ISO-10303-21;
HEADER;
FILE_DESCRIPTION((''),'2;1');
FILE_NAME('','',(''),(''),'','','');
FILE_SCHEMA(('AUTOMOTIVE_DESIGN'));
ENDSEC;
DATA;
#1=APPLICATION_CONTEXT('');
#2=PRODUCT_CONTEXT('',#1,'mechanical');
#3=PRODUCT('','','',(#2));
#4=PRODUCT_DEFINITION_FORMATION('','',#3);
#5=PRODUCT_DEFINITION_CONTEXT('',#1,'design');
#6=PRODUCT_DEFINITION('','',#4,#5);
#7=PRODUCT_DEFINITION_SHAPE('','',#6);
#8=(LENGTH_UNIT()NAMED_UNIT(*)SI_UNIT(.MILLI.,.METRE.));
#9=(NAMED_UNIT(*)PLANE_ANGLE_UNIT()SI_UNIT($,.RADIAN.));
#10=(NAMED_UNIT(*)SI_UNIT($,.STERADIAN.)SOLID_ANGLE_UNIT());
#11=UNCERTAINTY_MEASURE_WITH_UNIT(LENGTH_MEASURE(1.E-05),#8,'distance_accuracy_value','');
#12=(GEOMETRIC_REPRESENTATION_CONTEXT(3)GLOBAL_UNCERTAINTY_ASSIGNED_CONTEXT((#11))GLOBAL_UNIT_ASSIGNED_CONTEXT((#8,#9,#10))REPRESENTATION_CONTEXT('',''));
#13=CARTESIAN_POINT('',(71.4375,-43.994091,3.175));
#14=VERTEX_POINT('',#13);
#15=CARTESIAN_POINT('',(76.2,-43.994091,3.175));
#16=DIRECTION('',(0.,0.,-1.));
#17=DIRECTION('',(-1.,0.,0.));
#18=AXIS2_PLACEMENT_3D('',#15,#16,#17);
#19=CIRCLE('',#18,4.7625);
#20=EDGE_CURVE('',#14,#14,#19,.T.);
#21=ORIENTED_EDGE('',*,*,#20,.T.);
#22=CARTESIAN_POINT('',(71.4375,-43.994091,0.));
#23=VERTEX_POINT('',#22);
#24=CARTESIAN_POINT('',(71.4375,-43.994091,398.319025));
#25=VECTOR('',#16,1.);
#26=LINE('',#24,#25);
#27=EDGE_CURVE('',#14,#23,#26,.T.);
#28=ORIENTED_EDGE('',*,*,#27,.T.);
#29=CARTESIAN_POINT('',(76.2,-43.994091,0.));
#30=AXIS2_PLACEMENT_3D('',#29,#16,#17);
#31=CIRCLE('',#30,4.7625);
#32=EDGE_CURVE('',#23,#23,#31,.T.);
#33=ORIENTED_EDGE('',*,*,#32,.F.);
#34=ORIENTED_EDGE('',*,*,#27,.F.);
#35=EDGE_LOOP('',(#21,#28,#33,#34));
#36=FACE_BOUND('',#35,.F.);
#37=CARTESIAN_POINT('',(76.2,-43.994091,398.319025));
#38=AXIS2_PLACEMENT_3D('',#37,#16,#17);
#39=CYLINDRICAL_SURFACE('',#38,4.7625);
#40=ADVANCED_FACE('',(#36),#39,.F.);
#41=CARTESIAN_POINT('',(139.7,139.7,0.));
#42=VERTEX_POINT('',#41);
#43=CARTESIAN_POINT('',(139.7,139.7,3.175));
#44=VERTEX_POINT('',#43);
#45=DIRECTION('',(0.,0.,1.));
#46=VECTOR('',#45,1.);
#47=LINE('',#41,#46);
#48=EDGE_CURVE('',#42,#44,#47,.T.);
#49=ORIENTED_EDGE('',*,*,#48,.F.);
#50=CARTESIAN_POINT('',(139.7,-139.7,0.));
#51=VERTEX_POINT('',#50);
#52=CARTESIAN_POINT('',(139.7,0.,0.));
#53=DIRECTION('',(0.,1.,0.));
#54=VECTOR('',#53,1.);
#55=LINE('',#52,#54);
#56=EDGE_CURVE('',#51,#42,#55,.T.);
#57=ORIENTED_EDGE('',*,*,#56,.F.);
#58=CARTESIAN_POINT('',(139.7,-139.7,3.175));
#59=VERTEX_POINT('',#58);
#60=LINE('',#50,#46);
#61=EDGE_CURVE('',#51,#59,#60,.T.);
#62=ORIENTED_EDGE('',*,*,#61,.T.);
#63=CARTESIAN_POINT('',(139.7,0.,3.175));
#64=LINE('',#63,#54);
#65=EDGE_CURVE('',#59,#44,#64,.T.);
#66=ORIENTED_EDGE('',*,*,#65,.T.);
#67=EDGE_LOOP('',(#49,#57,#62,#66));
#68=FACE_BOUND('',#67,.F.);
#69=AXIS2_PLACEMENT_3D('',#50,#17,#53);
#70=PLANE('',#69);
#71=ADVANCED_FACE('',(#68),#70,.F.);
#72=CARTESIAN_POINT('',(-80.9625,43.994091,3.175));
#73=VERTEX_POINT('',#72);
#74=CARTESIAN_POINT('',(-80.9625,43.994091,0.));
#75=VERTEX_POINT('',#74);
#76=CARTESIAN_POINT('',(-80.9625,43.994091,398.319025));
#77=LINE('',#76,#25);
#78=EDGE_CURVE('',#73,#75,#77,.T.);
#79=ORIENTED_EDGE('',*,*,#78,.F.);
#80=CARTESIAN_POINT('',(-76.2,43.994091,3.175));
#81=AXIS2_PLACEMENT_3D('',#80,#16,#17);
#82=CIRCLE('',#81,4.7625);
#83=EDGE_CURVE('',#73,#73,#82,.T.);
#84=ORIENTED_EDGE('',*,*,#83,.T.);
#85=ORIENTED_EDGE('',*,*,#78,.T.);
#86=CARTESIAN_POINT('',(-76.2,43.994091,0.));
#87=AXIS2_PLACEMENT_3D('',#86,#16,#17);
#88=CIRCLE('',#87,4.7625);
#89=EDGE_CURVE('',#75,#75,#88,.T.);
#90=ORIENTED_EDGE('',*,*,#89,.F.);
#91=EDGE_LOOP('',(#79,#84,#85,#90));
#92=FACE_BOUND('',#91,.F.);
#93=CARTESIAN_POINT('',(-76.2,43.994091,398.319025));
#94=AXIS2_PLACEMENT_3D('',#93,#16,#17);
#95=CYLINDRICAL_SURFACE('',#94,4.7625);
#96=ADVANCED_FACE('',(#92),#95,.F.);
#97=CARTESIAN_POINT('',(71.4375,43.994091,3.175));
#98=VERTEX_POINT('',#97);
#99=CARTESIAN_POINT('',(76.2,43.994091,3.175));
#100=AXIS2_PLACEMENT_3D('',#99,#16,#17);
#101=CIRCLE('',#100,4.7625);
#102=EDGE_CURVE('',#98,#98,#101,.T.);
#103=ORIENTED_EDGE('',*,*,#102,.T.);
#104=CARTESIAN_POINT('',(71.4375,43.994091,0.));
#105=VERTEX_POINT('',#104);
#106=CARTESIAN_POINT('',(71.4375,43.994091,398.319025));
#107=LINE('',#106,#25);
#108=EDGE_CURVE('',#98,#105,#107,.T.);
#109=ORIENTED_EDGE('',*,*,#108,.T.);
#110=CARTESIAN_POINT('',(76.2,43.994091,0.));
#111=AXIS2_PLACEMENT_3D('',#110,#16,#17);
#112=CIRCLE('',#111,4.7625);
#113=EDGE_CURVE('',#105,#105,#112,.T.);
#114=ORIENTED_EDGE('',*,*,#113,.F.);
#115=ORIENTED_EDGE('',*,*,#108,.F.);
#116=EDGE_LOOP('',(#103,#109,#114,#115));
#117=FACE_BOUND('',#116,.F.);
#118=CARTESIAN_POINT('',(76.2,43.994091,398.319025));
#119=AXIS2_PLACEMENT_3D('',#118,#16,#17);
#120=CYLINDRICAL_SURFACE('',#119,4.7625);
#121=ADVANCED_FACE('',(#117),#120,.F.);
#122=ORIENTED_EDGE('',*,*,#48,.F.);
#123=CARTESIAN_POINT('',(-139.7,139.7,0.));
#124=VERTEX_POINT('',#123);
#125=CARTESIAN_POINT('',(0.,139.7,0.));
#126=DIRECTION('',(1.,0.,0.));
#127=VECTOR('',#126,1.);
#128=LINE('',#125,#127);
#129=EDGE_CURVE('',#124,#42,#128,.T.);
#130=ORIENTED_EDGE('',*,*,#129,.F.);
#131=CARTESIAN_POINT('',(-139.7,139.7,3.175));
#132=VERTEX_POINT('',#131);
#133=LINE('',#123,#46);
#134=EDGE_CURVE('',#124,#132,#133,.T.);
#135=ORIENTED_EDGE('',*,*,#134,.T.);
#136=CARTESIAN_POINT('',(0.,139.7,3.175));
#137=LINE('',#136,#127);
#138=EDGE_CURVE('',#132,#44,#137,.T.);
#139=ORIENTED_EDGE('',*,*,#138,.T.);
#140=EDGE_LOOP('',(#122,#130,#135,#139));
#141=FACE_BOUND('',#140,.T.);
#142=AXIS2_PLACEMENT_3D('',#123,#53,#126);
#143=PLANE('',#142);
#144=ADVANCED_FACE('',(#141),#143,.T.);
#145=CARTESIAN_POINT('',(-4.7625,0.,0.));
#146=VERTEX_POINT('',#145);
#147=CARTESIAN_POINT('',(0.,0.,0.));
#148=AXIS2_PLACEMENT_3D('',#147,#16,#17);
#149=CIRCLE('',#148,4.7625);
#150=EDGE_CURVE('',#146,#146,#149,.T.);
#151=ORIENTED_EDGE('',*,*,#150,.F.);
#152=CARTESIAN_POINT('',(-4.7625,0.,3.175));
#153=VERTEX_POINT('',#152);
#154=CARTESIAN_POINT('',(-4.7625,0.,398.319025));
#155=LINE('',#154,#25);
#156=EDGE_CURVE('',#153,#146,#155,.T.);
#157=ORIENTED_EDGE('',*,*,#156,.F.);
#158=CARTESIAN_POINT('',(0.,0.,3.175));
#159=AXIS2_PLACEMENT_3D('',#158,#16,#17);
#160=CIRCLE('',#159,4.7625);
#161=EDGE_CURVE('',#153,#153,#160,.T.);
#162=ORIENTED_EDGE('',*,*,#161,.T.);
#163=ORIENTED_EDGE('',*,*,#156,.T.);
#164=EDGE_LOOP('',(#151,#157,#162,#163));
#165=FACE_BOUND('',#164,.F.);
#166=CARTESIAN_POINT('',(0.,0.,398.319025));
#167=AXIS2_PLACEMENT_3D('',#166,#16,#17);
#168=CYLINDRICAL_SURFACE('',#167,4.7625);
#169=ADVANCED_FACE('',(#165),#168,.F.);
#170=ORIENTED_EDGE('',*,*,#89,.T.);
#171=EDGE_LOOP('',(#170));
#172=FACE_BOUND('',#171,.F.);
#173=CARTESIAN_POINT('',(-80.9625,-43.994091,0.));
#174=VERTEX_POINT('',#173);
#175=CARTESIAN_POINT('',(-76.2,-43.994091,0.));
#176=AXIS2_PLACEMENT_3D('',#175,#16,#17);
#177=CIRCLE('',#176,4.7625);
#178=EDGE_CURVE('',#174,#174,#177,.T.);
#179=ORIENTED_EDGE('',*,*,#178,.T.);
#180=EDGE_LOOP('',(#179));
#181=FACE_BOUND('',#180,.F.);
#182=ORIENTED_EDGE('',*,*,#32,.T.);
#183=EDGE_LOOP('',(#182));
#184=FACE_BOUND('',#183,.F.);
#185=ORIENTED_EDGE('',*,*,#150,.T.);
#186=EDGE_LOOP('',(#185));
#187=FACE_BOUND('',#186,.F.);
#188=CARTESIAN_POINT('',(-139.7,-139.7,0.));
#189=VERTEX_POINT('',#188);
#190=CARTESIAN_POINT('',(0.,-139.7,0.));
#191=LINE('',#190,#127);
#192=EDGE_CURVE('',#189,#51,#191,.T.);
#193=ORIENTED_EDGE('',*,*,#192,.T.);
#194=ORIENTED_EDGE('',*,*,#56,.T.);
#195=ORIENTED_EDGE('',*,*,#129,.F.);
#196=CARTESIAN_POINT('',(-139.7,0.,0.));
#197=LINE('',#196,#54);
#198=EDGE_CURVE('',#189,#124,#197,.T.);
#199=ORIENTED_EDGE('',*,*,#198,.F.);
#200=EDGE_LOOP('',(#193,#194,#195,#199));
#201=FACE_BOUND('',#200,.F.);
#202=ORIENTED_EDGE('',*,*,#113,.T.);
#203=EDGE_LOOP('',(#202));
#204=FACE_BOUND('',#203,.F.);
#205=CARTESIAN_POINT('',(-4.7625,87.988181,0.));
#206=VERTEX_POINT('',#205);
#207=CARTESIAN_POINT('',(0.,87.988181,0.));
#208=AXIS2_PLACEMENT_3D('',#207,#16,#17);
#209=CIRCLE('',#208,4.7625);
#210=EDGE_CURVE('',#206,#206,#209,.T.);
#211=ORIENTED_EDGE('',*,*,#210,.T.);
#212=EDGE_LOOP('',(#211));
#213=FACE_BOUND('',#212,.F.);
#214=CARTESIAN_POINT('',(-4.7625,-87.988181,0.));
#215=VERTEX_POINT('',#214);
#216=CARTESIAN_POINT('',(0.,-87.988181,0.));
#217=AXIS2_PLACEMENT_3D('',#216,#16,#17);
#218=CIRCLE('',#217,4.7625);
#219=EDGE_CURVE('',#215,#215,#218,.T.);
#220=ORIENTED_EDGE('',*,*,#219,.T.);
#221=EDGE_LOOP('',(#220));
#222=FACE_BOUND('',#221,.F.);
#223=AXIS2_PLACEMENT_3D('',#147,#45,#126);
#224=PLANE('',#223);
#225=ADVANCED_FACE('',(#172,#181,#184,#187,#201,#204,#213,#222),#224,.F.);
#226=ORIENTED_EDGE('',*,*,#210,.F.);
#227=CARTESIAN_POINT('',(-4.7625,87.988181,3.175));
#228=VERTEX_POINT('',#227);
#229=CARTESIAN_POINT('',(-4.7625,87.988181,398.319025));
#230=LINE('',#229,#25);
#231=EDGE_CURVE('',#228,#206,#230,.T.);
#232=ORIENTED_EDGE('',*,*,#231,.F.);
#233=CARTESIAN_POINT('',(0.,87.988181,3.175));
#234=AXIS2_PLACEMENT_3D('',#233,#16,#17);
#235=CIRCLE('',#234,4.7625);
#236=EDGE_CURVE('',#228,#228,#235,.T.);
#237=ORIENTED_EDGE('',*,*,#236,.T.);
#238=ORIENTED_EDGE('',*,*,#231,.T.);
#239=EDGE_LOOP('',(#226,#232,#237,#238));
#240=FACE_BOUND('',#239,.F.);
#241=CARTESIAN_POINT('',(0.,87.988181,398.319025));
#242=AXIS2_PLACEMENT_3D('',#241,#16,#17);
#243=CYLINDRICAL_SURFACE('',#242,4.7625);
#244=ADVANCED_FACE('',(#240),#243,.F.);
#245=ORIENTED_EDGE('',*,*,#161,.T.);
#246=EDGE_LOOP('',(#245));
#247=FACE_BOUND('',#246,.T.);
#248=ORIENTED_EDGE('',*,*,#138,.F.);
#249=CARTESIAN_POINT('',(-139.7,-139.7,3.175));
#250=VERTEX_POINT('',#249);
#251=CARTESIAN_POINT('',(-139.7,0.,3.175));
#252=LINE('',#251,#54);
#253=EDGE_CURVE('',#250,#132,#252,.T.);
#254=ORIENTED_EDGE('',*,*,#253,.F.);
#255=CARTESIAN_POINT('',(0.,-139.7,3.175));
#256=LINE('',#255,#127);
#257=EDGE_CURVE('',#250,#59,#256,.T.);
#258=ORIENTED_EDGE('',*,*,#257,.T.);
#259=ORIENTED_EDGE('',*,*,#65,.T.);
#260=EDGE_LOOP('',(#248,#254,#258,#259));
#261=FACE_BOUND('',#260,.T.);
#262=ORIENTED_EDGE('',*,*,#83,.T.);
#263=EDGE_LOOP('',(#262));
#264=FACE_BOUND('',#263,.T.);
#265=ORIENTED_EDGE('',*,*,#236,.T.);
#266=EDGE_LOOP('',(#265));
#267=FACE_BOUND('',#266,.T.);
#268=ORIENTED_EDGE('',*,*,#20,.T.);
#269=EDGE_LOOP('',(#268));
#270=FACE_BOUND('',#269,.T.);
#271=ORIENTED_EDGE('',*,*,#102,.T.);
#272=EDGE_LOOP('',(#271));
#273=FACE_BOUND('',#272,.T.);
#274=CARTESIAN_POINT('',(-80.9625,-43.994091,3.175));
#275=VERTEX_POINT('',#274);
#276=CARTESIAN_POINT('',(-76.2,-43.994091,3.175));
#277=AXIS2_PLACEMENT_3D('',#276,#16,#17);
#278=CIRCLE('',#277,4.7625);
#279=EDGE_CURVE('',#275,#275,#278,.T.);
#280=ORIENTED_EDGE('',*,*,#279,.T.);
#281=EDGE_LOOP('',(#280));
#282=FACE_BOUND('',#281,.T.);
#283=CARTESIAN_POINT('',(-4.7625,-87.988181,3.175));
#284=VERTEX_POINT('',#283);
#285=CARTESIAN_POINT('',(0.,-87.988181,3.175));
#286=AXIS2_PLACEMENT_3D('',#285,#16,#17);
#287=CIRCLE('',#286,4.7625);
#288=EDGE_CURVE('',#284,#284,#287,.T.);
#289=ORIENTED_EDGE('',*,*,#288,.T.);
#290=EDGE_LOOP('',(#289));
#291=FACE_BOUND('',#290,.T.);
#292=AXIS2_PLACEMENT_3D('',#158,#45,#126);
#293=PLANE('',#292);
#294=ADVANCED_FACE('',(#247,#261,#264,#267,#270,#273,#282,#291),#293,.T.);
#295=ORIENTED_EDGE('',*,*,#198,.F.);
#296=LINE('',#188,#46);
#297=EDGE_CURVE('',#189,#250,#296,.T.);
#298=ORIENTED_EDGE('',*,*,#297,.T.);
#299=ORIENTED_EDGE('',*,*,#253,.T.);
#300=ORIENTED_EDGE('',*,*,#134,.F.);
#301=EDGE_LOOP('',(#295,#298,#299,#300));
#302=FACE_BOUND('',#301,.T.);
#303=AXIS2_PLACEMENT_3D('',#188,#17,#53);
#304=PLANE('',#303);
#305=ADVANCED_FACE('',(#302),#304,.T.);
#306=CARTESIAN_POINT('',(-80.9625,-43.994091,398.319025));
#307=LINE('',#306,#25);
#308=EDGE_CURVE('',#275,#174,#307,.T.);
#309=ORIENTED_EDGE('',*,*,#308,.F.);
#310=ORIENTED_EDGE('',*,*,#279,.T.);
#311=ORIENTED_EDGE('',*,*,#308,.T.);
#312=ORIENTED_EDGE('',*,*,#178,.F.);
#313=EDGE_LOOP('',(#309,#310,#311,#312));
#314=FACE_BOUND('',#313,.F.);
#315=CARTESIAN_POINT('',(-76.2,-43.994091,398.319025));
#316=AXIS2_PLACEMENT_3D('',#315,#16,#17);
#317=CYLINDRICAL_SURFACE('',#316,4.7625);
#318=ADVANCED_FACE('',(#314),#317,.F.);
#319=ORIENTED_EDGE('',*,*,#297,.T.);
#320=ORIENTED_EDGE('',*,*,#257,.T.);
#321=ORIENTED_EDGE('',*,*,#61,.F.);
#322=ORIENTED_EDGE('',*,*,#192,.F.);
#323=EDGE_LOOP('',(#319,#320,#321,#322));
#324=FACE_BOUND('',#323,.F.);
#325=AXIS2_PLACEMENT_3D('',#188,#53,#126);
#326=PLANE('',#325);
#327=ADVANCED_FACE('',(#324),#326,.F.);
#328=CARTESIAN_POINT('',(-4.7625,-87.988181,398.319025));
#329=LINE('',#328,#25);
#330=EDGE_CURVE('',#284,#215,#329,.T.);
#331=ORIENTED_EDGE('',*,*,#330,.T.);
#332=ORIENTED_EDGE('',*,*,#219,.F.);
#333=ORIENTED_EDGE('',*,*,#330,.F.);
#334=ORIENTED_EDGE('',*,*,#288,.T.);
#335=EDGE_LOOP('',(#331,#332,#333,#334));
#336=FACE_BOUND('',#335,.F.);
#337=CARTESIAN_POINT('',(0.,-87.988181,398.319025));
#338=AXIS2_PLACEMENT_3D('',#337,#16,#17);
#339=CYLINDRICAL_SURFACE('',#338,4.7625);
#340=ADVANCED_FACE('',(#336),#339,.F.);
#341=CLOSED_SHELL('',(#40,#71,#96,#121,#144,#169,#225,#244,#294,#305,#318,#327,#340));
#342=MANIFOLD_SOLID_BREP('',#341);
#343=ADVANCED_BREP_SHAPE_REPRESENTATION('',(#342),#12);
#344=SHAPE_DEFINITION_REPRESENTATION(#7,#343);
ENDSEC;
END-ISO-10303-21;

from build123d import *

# Parameters (mm, degrees)
F0_W     = 279.4
F0_H     = 279.4
F1_DEPTH = 3.175
F3_D     = 9.525


# Not quite as in the source:
# - a length typed as a fraction of an inch, garbled in the dataset ("3 / 203.2 mm" for 3/8 in), is restored


with BuildPart() as f1:
    # F0 (on Top) → F1 (new body)
    with BuildSketch(Plane.XY):
        Rectangle(F0_W, F0_H)
    extrude(amount=F1_DEPTH)

    # F3 (through all)
    with Locations(Plane.XY.offset(3.175)):
        with Locations((0, 87.9881810245), (76.2, 43.9940905122), (76.2, -43.9940905122), (0, -87.9881810245), (-76.2, -43.9940905122), (-76.2, 43.9940905122), (0, 0)):
            Hole(F3_D / 2)


solid = f1.part
